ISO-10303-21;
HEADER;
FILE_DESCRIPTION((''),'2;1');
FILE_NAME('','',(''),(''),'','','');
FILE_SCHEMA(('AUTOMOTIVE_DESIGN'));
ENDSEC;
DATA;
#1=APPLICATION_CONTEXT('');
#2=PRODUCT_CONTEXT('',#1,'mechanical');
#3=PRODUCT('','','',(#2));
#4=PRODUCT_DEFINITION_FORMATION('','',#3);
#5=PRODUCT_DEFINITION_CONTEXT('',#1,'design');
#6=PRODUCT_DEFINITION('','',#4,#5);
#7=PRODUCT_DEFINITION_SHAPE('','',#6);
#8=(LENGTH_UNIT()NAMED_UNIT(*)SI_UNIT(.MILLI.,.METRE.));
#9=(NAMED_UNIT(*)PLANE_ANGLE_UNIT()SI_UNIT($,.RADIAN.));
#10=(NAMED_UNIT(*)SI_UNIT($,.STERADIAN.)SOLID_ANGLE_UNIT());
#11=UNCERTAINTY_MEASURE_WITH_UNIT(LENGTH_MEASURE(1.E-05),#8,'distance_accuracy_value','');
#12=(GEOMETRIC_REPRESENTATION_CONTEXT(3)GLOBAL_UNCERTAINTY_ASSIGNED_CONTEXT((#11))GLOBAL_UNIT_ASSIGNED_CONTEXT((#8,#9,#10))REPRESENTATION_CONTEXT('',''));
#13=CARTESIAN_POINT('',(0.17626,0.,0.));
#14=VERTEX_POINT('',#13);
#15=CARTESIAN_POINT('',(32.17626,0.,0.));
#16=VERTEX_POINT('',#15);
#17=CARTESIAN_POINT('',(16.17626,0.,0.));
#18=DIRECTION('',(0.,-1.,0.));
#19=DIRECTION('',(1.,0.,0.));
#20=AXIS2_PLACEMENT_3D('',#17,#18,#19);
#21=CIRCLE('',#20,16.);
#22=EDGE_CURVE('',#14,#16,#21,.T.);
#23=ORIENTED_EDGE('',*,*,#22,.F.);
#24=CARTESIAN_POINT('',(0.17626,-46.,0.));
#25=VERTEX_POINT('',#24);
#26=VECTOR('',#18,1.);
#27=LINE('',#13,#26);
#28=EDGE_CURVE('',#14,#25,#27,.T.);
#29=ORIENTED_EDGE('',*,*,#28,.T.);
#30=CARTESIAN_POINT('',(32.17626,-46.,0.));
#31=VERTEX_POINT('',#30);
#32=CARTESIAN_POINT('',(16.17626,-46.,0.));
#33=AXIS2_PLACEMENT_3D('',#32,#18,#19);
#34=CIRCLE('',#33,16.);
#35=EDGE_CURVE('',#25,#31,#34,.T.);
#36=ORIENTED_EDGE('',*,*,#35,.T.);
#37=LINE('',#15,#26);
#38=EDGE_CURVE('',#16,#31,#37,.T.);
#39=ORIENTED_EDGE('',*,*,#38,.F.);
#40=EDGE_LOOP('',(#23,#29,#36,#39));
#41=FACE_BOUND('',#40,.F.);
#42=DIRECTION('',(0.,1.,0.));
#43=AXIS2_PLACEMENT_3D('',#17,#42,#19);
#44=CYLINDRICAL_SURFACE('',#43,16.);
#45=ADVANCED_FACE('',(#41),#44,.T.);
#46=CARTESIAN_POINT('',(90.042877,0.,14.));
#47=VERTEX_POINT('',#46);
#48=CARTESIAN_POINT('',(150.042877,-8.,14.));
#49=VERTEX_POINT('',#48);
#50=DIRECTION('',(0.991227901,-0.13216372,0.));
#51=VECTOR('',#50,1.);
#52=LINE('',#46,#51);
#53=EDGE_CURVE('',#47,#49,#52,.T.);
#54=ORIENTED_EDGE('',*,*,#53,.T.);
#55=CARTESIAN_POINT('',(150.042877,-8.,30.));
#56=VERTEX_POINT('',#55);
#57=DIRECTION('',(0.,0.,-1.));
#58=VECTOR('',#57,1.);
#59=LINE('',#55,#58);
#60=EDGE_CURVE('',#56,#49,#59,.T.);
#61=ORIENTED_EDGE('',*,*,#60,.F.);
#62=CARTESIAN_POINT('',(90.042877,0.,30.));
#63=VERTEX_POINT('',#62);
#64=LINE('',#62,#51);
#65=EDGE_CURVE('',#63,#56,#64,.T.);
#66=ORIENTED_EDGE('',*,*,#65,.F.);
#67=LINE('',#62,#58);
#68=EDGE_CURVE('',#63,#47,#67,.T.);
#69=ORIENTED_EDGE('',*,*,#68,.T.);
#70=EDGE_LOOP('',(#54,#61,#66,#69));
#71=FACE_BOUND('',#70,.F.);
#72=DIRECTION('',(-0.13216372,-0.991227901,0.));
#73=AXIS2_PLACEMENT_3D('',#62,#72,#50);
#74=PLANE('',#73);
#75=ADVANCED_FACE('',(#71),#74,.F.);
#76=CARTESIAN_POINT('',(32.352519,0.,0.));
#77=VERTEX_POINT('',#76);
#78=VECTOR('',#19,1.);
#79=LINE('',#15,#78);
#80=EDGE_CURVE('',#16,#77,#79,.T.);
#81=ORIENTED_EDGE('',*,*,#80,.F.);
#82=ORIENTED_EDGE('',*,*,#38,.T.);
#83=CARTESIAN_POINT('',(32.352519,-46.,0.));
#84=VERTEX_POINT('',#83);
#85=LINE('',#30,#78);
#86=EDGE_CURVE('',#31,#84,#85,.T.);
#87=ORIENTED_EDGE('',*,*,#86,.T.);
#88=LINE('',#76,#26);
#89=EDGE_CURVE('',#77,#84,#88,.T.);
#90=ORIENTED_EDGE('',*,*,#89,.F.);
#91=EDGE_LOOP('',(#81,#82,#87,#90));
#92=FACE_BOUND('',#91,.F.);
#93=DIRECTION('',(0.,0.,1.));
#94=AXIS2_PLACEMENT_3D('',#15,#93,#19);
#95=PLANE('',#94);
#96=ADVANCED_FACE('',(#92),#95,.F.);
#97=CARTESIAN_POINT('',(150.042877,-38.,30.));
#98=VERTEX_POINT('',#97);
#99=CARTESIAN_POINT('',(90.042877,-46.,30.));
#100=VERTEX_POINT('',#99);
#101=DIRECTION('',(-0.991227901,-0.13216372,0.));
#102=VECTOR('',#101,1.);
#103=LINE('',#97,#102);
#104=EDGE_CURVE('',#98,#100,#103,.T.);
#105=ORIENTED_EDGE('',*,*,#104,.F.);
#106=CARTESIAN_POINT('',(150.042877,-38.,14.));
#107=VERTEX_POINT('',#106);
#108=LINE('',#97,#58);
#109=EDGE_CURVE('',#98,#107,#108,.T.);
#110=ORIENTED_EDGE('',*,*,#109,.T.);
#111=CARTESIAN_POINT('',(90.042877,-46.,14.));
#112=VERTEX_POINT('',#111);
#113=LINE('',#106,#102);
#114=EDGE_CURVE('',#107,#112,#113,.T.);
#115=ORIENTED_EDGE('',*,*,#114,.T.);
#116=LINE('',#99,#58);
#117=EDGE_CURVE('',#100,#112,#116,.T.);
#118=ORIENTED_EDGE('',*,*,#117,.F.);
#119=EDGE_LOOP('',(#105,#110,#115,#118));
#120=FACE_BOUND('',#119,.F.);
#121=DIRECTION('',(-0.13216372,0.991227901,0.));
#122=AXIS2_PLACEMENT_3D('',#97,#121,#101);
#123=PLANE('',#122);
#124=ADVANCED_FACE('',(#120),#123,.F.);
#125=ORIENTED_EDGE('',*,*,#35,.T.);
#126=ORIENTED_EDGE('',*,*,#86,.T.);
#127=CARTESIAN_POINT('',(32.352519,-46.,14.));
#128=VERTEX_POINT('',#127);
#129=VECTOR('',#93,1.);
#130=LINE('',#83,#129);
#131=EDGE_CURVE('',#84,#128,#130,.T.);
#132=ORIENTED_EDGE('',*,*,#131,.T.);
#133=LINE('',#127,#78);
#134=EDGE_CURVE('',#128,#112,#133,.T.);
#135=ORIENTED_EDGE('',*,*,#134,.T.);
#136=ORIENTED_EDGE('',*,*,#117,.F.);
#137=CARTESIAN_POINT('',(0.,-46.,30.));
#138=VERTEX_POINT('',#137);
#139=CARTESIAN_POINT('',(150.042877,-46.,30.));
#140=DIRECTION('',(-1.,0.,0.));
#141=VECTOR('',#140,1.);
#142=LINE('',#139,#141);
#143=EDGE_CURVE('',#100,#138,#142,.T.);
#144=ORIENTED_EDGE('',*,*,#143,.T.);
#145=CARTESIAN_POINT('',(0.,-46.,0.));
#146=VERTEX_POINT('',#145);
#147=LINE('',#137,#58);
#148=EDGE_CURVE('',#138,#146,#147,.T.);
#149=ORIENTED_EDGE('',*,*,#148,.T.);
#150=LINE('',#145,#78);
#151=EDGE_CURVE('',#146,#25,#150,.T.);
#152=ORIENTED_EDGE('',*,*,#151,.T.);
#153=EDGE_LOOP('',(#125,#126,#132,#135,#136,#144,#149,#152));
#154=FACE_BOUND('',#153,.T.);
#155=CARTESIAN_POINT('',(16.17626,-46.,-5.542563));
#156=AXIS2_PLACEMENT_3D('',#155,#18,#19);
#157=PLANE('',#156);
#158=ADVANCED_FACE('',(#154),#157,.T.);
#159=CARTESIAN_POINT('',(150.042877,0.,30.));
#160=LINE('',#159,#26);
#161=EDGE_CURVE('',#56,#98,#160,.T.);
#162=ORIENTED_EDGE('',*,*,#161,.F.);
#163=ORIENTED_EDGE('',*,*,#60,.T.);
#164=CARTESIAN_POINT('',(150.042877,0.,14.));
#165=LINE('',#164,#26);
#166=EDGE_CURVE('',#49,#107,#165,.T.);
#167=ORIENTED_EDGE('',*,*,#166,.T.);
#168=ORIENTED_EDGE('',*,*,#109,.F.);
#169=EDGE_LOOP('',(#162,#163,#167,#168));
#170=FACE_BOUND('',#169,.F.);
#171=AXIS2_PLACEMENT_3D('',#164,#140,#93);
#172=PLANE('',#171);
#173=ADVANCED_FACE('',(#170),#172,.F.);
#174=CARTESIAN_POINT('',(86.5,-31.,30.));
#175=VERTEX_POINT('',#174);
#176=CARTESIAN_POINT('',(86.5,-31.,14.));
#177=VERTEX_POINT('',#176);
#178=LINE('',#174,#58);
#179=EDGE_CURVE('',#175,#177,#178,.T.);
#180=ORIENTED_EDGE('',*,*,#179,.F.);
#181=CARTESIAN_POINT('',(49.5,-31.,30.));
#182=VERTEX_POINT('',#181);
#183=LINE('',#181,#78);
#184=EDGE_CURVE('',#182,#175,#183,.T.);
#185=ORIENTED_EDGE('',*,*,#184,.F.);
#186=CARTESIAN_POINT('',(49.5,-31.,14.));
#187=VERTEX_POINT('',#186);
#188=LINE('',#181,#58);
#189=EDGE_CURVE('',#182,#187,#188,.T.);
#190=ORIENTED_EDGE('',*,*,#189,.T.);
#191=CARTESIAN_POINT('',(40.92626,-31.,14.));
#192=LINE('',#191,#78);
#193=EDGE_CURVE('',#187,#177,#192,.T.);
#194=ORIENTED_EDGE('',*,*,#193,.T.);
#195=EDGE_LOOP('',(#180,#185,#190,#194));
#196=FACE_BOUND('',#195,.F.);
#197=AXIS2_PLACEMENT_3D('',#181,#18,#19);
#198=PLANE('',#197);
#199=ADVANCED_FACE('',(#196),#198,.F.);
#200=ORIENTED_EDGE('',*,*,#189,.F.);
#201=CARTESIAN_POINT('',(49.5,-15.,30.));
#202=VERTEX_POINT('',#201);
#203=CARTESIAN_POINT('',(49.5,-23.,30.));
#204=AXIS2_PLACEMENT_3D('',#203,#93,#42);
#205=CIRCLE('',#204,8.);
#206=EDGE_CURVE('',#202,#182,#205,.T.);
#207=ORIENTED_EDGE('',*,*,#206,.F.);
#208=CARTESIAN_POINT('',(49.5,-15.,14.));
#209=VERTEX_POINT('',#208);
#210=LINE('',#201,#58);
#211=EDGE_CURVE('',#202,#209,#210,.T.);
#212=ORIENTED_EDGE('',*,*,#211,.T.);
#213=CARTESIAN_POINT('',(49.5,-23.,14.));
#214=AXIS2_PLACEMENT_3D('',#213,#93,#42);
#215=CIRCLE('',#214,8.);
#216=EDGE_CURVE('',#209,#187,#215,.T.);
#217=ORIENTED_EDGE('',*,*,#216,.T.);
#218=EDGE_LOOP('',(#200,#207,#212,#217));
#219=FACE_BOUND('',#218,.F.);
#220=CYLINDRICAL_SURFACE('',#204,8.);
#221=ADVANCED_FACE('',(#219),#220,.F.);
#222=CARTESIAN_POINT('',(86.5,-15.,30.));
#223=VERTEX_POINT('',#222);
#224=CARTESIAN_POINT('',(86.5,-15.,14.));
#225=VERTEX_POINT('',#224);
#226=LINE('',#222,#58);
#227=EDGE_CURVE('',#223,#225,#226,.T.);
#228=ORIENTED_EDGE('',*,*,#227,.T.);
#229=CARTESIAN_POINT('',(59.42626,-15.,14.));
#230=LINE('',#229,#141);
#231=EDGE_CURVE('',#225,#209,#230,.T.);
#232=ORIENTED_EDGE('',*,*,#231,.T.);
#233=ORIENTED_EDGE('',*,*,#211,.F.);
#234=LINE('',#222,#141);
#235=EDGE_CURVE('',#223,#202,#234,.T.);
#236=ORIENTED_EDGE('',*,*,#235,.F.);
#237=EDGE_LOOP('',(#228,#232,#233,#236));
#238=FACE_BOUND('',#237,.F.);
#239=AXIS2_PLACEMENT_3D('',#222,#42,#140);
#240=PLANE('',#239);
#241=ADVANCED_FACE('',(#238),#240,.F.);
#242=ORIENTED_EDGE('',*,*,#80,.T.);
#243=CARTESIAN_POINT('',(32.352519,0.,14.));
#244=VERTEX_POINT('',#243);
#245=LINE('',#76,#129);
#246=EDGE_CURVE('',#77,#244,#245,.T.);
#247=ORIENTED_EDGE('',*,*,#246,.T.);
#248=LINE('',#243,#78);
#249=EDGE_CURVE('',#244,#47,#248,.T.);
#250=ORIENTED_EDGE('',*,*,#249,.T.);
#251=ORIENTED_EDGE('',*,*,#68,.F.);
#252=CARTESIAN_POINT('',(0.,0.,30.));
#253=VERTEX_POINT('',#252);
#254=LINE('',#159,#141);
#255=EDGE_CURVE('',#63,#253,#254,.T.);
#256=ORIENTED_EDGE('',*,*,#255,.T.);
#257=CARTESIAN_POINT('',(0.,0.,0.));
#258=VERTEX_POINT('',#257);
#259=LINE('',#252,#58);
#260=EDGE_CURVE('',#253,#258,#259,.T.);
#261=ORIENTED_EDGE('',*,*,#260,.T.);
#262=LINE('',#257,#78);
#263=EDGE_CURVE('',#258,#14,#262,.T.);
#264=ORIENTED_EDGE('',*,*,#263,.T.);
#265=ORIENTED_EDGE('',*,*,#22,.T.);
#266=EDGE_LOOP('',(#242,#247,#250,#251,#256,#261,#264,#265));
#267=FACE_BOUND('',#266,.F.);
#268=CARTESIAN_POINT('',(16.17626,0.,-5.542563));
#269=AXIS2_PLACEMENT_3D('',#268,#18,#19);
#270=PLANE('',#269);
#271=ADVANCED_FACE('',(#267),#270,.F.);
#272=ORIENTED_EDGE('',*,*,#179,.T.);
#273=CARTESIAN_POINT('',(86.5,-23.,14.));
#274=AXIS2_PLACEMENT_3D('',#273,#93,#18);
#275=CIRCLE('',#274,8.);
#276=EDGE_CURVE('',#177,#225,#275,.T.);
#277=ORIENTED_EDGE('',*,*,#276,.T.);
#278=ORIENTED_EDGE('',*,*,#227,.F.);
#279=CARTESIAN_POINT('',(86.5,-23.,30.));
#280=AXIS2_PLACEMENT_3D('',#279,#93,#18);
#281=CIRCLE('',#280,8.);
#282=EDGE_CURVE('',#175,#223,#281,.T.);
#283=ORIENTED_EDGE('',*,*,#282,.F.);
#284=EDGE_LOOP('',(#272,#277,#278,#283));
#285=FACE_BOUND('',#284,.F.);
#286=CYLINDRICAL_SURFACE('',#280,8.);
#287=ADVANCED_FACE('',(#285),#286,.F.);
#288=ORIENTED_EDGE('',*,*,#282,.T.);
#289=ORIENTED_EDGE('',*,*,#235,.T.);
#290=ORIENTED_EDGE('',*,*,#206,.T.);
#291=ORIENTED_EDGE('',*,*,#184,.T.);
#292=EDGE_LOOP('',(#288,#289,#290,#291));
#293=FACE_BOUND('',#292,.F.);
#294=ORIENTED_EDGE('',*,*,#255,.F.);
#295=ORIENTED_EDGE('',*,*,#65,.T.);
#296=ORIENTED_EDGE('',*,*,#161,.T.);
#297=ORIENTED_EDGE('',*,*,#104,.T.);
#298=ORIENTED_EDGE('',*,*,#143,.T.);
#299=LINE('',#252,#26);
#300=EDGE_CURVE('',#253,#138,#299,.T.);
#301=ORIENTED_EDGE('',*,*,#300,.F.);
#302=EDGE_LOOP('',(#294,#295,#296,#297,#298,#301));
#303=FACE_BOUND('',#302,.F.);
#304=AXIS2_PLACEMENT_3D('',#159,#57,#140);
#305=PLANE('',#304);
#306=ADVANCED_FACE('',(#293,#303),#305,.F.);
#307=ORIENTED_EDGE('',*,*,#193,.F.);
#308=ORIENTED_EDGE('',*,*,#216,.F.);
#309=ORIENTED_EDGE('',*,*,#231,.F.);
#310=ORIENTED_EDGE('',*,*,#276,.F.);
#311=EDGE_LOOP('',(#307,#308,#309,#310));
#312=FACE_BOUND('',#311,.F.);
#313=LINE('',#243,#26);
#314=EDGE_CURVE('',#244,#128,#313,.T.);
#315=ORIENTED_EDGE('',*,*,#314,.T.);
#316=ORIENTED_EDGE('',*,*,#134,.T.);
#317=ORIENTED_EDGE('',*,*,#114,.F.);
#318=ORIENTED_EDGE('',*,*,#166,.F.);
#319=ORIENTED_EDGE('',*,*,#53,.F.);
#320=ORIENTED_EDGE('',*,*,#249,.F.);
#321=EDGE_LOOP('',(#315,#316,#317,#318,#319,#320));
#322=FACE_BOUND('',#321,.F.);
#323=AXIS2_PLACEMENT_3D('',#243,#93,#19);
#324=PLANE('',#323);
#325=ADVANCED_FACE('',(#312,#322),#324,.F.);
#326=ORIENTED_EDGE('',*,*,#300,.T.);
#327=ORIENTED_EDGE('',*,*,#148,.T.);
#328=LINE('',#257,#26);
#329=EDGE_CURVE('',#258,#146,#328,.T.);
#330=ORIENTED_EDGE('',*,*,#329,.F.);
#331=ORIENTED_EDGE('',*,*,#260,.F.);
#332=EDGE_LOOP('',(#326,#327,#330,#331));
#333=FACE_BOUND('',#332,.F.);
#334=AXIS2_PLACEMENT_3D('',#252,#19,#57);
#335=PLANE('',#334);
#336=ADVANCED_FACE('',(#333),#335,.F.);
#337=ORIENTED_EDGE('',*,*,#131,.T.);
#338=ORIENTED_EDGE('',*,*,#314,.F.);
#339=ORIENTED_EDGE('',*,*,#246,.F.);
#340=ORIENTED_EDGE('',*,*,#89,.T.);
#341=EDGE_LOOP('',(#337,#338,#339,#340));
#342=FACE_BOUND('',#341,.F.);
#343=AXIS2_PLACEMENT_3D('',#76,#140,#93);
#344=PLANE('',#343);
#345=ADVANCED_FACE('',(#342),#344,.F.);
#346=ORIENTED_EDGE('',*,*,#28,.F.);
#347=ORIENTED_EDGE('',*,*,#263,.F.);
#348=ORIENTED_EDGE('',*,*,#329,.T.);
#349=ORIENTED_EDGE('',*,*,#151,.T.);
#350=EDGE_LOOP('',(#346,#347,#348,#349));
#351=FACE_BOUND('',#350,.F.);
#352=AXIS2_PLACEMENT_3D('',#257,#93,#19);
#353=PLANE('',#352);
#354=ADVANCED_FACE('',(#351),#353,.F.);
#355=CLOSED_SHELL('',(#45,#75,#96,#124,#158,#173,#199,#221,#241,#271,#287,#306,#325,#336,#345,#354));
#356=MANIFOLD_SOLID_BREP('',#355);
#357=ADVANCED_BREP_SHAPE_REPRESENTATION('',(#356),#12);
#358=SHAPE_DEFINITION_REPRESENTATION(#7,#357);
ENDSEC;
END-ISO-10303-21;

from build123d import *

# Parameters (mm, degrees)
F1_DEPTH = 46
F3_DEPTH = 16
F5_DEPTH = 46.001


# Not quite as in the source:
# - a feature names something its author has since deleted; it is built from what else it names


with BuildPart() as f1:
    # F0 (on Front) → F1 (new body)
    with BuildSketch(Plane.XZ):
        with BuildLine():
            ThreePointArc((0.1762595361, 0), (16.1762595361, -16), (32.1762595361, 0))
            Line((32.1762595361, 0), (0.1762595361, 0))
        make_face()
        with BuildLine():
            Line((0.1762595361, 0), (32.1762595361, 0))
            ThreePointArc((32.1762595361, 0), (16.1762595361, 16), (0.1762595361, 0))
        make_face()
        with BuildLine():
            ThreePointArc((0.1762595361, 0), (16.1762595361, 16), (32.1762595361, 0))
            Line((32.1762595361, 0), (32.3525190723, 0))
            Line((32.3525190723, 0), (32.3525190723, 14))
            Line((32.3525190723, 14), (32.3525190723, 30))
            Line((32.3525190723, 30), (0, 30))
            Line((0, 30), (0, 0))
            Line((0, 0), (0.1762595361, 0))
        make_face()
        Polygon((32.3525190723, 30), (32.3525190723, 14), (150.0428766012, 14), (150.0428766012, 30), (104.9743145704, 30), (67.9628998041, 30), (45.0152419508, 30), align=None)
    extrude(amount=F1_DEPTH)

    # F2 (on face) → F3 (cut)
    with BuildSketch(Plane.XY.offset(30)):
        Polygon((90.0428766012, 0), (150.0428766012, -8), (150.0428766012, 0), align=None)
        Polygon((90.0428766012, -46), (150.0428766012, -46), (150.0428766012, -38), align=None)
    extrude(amount=-F3_DEPTH, mode=Mode.SUBTRACT)

    # F4 (on face) → F5 (cut, through all)
    with BuildSketch(Plane.XY.offset(30)):
        with BuildLine():
            Line((86.5, -15), (68, -15))
            Line((68, -15), (49.5, -15))
            ThreePointArc((49.5, -15), (41.5, -23), (49.5, -31))
            Line((49.5, -31), (68, -31))
            Line((68, -31), (86.5, -31))
            ThreePointArc((86.5, -31), (94.5, -23), (86.5, -15))
        make_face()
    extrude(amount=-F5_DEPTH, mode=Mode.SUBTRACT)


solid = f1.part
